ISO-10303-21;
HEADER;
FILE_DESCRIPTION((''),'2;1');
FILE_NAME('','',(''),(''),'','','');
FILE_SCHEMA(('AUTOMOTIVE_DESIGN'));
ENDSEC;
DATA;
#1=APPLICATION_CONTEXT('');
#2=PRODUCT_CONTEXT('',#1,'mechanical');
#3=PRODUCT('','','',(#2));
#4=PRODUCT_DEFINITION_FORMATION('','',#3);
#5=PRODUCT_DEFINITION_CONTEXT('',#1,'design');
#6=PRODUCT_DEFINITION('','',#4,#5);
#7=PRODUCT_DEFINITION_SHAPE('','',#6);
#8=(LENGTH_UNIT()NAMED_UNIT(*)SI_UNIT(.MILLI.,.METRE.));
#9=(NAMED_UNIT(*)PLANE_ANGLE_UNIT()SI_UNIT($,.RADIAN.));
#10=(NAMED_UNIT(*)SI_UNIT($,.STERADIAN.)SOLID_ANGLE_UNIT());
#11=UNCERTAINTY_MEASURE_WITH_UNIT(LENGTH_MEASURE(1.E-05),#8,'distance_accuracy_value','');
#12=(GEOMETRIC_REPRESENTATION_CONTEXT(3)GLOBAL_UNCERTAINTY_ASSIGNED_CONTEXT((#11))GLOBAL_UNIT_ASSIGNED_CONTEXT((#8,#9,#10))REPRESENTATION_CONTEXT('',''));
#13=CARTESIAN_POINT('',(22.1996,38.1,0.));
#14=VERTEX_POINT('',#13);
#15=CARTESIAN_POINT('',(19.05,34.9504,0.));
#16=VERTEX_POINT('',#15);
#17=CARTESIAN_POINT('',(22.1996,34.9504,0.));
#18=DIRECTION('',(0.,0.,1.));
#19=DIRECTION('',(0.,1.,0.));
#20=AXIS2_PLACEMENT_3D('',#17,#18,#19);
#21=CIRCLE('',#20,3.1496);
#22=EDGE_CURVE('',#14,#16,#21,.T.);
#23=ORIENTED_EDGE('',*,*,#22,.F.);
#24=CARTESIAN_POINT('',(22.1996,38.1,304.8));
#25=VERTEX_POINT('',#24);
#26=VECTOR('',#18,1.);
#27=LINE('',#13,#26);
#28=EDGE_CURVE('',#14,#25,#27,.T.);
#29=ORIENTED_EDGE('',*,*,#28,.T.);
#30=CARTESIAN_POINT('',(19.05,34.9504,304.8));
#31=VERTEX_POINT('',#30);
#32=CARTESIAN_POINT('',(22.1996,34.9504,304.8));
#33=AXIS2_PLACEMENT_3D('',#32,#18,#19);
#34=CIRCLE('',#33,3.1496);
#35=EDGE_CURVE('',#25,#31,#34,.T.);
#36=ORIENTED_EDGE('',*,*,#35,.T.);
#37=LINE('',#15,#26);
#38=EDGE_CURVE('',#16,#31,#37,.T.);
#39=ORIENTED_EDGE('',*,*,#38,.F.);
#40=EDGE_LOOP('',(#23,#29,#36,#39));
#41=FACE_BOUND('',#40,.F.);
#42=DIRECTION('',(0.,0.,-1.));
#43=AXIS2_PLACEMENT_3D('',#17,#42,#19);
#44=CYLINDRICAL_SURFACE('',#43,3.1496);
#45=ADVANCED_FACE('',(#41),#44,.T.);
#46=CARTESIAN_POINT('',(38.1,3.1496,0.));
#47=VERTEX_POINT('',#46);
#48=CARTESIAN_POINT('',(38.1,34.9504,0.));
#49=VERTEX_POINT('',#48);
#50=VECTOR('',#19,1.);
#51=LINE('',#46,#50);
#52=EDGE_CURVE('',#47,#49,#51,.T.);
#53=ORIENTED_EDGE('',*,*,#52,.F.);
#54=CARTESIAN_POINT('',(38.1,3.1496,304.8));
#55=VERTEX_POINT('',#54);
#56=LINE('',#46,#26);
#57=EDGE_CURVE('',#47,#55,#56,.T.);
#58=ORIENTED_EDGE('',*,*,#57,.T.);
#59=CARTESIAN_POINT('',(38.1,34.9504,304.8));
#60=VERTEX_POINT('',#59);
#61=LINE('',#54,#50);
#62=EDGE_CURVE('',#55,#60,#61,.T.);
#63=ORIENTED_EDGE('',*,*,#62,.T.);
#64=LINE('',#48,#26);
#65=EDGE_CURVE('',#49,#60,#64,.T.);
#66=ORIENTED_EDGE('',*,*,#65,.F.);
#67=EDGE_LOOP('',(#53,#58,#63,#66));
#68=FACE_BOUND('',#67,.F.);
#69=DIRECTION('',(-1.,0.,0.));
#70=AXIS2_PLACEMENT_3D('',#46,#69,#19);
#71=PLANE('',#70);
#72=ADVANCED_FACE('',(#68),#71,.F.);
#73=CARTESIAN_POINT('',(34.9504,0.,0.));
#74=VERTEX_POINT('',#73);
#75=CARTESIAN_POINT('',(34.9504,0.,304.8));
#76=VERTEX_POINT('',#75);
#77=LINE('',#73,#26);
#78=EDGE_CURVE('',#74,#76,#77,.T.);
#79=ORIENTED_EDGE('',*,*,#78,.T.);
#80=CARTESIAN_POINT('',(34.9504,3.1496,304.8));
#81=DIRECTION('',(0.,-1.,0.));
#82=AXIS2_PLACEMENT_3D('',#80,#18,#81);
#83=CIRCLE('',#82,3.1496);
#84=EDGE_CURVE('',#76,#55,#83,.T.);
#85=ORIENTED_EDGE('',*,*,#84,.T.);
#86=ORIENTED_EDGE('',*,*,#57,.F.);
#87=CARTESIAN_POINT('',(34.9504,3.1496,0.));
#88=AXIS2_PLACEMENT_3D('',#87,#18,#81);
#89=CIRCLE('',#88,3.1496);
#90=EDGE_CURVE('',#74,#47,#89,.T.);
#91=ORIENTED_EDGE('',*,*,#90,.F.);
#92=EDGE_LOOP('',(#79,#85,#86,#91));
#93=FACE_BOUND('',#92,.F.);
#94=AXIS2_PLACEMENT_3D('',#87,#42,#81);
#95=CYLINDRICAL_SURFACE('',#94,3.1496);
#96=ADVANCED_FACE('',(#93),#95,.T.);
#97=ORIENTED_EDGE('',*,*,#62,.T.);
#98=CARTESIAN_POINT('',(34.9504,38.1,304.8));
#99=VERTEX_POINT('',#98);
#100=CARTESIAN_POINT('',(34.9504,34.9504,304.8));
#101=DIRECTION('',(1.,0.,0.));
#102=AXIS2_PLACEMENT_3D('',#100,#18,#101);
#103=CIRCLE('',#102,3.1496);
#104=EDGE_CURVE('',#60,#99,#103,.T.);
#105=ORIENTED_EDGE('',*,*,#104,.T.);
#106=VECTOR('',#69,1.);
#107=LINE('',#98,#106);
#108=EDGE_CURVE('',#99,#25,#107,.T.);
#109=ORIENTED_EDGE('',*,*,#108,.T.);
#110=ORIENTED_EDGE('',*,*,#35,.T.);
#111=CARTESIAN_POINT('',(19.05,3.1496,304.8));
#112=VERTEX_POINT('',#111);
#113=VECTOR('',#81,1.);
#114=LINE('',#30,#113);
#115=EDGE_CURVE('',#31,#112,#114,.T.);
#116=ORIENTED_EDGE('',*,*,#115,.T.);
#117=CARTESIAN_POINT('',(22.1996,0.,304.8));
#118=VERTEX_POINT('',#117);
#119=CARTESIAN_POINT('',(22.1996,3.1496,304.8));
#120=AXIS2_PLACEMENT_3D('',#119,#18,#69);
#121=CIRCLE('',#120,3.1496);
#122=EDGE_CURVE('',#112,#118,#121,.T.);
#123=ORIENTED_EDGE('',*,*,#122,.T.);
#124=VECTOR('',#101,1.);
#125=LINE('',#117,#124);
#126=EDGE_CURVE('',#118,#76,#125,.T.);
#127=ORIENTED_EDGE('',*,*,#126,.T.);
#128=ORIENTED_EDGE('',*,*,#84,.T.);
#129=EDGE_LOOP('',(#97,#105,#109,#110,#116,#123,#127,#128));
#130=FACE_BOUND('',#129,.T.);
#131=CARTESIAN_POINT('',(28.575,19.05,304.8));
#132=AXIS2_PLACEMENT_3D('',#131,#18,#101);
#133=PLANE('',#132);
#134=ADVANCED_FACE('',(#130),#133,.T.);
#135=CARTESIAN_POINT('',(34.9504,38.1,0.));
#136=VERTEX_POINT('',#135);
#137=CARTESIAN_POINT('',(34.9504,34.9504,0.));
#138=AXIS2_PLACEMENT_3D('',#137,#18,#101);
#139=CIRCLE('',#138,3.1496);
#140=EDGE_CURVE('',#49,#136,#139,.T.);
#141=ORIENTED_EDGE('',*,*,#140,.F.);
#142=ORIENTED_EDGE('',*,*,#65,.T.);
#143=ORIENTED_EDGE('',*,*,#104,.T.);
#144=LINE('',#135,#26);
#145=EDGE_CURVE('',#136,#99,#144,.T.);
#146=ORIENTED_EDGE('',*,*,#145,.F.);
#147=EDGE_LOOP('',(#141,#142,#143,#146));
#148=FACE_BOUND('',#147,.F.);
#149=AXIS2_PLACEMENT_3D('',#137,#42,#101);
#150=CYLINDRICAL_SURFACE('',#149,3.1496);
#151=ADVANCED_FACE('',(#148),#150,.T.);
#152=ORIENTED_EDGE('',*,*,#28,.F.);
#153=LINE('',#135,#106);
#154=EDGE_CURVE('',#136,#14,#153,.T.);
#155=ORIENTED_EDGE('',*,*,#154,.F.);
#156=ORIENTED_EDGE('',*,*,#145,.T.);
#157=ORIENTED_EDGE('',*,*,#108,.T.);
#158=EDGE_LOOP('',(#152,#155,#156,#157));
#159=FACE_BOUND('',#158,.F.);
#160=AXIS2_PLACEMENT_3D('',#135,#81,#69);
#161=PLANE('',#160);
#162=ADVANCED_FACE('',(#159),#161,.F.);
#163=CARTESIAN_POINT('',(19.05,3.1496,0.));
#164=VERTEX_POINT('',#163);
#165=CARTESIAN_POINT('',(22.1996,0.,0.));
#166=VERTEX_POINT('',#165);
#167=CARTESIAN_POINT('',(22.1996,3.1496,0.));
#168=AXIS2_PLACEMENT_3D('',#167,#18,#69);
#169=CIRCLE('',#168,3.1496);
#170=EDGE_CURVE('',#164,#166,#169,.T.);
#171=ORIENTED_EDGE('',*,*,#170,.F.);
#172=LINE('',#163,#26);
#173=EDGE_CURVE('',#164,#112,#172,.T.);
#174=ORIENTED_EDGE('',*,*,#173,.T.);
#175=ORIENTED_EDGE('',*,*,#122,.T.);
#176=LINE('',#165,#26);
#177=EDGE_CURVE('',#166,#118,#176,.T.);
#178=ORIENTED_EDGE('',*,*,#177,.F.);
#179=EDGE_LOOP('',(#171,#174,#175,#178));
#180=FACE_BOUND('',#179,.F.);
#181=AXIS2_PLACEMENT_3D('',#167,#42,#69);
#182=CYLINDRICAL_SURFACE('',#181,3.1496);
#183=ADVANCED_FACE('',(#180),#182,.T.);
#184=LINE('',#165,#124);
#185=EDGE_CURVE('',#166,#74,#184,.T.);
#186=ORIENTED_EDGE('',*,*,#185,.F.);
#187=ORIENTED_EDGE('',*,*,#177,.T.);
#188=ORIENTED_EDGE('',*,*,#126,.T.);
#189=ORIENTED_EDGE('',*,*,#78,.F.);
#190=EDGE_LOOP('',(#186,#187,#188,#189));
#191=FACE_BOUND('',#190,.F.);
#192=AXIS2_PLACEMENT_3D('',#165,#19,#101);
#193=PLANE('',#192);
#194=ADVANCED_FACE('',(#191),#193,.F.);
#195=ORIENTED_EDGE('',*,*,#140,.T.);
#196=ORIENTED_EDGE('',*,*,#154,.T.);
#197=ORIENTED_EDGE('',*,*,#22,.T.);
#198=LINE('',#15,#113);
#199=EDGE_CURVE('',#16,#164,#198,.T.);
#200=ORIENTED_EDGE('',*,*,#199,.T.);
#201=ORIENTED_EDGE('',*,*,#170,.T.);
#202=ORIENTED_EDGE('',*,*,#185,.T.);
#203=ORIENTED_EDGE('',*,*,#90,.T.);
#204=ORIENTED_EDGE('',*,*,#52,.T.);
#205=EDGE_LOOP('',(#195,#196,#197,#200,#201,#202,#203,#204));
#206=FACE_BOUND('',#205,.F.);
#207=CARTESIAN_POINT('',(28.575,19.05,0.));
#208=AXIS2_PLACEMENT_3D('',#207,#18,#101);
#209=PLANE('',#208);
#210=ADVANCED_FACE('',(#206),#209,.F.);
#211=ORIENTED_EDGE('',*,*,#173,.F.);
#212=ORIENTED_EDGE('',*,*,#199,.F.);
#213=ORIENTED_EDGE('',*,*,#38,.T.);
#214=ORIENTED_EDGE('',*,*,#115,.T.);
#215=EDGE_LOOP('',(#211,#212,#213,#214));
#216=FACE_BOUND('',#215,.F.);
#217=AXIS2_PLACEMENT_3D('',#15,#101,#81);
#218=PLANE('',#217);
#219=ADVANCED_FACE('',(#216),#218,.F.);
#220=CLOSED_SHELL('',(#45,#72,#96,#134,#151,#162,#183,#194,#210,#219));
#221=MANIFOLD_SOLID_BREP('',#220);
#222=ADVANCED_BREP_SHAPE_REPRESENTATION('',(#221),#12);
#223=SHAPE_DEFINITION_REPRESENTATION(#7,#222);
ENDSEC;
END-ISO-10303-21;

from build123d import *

# Parameters (mm, degrees)
F1_DEPTH = 304.8


# Not quite as in the source:
# - a feature names something its author has since deleted; it is built from what else it names


with BuildPart() as f1:
    # F0 (on Top) → F1 (new body)
    with BuildSketch(Plane.XY):
        with BuildLine():
            Line((19.05, 34.9504), (19.05, 3.1496))
            ThreePointArc((19.05, 3.1496), (19.972496482, 0.922496482), (22.1996, 0))
            Line((22.1996, 0), (34.9504, 0))
            ThreePointArc((34.9504, 0), (37.177503518, 0.922496482), (38.1, 3.1496))
            Line((38.1, 3.1496), (38.1, 34.9504))
            ThreePointArc((38.1, 34.9504), (37.177503518, 37.177503518), (34.9504, 38.1))
            Line((34.9504, 38.1), (22.1996, 38.1))
            ThreePointArc((22.1996, 38.1), (19.972496482, 37.177503518), (19.05, 34.9504))
        make_face()
    extrude(amount=F1_DEPTH)


solid = f1.part
